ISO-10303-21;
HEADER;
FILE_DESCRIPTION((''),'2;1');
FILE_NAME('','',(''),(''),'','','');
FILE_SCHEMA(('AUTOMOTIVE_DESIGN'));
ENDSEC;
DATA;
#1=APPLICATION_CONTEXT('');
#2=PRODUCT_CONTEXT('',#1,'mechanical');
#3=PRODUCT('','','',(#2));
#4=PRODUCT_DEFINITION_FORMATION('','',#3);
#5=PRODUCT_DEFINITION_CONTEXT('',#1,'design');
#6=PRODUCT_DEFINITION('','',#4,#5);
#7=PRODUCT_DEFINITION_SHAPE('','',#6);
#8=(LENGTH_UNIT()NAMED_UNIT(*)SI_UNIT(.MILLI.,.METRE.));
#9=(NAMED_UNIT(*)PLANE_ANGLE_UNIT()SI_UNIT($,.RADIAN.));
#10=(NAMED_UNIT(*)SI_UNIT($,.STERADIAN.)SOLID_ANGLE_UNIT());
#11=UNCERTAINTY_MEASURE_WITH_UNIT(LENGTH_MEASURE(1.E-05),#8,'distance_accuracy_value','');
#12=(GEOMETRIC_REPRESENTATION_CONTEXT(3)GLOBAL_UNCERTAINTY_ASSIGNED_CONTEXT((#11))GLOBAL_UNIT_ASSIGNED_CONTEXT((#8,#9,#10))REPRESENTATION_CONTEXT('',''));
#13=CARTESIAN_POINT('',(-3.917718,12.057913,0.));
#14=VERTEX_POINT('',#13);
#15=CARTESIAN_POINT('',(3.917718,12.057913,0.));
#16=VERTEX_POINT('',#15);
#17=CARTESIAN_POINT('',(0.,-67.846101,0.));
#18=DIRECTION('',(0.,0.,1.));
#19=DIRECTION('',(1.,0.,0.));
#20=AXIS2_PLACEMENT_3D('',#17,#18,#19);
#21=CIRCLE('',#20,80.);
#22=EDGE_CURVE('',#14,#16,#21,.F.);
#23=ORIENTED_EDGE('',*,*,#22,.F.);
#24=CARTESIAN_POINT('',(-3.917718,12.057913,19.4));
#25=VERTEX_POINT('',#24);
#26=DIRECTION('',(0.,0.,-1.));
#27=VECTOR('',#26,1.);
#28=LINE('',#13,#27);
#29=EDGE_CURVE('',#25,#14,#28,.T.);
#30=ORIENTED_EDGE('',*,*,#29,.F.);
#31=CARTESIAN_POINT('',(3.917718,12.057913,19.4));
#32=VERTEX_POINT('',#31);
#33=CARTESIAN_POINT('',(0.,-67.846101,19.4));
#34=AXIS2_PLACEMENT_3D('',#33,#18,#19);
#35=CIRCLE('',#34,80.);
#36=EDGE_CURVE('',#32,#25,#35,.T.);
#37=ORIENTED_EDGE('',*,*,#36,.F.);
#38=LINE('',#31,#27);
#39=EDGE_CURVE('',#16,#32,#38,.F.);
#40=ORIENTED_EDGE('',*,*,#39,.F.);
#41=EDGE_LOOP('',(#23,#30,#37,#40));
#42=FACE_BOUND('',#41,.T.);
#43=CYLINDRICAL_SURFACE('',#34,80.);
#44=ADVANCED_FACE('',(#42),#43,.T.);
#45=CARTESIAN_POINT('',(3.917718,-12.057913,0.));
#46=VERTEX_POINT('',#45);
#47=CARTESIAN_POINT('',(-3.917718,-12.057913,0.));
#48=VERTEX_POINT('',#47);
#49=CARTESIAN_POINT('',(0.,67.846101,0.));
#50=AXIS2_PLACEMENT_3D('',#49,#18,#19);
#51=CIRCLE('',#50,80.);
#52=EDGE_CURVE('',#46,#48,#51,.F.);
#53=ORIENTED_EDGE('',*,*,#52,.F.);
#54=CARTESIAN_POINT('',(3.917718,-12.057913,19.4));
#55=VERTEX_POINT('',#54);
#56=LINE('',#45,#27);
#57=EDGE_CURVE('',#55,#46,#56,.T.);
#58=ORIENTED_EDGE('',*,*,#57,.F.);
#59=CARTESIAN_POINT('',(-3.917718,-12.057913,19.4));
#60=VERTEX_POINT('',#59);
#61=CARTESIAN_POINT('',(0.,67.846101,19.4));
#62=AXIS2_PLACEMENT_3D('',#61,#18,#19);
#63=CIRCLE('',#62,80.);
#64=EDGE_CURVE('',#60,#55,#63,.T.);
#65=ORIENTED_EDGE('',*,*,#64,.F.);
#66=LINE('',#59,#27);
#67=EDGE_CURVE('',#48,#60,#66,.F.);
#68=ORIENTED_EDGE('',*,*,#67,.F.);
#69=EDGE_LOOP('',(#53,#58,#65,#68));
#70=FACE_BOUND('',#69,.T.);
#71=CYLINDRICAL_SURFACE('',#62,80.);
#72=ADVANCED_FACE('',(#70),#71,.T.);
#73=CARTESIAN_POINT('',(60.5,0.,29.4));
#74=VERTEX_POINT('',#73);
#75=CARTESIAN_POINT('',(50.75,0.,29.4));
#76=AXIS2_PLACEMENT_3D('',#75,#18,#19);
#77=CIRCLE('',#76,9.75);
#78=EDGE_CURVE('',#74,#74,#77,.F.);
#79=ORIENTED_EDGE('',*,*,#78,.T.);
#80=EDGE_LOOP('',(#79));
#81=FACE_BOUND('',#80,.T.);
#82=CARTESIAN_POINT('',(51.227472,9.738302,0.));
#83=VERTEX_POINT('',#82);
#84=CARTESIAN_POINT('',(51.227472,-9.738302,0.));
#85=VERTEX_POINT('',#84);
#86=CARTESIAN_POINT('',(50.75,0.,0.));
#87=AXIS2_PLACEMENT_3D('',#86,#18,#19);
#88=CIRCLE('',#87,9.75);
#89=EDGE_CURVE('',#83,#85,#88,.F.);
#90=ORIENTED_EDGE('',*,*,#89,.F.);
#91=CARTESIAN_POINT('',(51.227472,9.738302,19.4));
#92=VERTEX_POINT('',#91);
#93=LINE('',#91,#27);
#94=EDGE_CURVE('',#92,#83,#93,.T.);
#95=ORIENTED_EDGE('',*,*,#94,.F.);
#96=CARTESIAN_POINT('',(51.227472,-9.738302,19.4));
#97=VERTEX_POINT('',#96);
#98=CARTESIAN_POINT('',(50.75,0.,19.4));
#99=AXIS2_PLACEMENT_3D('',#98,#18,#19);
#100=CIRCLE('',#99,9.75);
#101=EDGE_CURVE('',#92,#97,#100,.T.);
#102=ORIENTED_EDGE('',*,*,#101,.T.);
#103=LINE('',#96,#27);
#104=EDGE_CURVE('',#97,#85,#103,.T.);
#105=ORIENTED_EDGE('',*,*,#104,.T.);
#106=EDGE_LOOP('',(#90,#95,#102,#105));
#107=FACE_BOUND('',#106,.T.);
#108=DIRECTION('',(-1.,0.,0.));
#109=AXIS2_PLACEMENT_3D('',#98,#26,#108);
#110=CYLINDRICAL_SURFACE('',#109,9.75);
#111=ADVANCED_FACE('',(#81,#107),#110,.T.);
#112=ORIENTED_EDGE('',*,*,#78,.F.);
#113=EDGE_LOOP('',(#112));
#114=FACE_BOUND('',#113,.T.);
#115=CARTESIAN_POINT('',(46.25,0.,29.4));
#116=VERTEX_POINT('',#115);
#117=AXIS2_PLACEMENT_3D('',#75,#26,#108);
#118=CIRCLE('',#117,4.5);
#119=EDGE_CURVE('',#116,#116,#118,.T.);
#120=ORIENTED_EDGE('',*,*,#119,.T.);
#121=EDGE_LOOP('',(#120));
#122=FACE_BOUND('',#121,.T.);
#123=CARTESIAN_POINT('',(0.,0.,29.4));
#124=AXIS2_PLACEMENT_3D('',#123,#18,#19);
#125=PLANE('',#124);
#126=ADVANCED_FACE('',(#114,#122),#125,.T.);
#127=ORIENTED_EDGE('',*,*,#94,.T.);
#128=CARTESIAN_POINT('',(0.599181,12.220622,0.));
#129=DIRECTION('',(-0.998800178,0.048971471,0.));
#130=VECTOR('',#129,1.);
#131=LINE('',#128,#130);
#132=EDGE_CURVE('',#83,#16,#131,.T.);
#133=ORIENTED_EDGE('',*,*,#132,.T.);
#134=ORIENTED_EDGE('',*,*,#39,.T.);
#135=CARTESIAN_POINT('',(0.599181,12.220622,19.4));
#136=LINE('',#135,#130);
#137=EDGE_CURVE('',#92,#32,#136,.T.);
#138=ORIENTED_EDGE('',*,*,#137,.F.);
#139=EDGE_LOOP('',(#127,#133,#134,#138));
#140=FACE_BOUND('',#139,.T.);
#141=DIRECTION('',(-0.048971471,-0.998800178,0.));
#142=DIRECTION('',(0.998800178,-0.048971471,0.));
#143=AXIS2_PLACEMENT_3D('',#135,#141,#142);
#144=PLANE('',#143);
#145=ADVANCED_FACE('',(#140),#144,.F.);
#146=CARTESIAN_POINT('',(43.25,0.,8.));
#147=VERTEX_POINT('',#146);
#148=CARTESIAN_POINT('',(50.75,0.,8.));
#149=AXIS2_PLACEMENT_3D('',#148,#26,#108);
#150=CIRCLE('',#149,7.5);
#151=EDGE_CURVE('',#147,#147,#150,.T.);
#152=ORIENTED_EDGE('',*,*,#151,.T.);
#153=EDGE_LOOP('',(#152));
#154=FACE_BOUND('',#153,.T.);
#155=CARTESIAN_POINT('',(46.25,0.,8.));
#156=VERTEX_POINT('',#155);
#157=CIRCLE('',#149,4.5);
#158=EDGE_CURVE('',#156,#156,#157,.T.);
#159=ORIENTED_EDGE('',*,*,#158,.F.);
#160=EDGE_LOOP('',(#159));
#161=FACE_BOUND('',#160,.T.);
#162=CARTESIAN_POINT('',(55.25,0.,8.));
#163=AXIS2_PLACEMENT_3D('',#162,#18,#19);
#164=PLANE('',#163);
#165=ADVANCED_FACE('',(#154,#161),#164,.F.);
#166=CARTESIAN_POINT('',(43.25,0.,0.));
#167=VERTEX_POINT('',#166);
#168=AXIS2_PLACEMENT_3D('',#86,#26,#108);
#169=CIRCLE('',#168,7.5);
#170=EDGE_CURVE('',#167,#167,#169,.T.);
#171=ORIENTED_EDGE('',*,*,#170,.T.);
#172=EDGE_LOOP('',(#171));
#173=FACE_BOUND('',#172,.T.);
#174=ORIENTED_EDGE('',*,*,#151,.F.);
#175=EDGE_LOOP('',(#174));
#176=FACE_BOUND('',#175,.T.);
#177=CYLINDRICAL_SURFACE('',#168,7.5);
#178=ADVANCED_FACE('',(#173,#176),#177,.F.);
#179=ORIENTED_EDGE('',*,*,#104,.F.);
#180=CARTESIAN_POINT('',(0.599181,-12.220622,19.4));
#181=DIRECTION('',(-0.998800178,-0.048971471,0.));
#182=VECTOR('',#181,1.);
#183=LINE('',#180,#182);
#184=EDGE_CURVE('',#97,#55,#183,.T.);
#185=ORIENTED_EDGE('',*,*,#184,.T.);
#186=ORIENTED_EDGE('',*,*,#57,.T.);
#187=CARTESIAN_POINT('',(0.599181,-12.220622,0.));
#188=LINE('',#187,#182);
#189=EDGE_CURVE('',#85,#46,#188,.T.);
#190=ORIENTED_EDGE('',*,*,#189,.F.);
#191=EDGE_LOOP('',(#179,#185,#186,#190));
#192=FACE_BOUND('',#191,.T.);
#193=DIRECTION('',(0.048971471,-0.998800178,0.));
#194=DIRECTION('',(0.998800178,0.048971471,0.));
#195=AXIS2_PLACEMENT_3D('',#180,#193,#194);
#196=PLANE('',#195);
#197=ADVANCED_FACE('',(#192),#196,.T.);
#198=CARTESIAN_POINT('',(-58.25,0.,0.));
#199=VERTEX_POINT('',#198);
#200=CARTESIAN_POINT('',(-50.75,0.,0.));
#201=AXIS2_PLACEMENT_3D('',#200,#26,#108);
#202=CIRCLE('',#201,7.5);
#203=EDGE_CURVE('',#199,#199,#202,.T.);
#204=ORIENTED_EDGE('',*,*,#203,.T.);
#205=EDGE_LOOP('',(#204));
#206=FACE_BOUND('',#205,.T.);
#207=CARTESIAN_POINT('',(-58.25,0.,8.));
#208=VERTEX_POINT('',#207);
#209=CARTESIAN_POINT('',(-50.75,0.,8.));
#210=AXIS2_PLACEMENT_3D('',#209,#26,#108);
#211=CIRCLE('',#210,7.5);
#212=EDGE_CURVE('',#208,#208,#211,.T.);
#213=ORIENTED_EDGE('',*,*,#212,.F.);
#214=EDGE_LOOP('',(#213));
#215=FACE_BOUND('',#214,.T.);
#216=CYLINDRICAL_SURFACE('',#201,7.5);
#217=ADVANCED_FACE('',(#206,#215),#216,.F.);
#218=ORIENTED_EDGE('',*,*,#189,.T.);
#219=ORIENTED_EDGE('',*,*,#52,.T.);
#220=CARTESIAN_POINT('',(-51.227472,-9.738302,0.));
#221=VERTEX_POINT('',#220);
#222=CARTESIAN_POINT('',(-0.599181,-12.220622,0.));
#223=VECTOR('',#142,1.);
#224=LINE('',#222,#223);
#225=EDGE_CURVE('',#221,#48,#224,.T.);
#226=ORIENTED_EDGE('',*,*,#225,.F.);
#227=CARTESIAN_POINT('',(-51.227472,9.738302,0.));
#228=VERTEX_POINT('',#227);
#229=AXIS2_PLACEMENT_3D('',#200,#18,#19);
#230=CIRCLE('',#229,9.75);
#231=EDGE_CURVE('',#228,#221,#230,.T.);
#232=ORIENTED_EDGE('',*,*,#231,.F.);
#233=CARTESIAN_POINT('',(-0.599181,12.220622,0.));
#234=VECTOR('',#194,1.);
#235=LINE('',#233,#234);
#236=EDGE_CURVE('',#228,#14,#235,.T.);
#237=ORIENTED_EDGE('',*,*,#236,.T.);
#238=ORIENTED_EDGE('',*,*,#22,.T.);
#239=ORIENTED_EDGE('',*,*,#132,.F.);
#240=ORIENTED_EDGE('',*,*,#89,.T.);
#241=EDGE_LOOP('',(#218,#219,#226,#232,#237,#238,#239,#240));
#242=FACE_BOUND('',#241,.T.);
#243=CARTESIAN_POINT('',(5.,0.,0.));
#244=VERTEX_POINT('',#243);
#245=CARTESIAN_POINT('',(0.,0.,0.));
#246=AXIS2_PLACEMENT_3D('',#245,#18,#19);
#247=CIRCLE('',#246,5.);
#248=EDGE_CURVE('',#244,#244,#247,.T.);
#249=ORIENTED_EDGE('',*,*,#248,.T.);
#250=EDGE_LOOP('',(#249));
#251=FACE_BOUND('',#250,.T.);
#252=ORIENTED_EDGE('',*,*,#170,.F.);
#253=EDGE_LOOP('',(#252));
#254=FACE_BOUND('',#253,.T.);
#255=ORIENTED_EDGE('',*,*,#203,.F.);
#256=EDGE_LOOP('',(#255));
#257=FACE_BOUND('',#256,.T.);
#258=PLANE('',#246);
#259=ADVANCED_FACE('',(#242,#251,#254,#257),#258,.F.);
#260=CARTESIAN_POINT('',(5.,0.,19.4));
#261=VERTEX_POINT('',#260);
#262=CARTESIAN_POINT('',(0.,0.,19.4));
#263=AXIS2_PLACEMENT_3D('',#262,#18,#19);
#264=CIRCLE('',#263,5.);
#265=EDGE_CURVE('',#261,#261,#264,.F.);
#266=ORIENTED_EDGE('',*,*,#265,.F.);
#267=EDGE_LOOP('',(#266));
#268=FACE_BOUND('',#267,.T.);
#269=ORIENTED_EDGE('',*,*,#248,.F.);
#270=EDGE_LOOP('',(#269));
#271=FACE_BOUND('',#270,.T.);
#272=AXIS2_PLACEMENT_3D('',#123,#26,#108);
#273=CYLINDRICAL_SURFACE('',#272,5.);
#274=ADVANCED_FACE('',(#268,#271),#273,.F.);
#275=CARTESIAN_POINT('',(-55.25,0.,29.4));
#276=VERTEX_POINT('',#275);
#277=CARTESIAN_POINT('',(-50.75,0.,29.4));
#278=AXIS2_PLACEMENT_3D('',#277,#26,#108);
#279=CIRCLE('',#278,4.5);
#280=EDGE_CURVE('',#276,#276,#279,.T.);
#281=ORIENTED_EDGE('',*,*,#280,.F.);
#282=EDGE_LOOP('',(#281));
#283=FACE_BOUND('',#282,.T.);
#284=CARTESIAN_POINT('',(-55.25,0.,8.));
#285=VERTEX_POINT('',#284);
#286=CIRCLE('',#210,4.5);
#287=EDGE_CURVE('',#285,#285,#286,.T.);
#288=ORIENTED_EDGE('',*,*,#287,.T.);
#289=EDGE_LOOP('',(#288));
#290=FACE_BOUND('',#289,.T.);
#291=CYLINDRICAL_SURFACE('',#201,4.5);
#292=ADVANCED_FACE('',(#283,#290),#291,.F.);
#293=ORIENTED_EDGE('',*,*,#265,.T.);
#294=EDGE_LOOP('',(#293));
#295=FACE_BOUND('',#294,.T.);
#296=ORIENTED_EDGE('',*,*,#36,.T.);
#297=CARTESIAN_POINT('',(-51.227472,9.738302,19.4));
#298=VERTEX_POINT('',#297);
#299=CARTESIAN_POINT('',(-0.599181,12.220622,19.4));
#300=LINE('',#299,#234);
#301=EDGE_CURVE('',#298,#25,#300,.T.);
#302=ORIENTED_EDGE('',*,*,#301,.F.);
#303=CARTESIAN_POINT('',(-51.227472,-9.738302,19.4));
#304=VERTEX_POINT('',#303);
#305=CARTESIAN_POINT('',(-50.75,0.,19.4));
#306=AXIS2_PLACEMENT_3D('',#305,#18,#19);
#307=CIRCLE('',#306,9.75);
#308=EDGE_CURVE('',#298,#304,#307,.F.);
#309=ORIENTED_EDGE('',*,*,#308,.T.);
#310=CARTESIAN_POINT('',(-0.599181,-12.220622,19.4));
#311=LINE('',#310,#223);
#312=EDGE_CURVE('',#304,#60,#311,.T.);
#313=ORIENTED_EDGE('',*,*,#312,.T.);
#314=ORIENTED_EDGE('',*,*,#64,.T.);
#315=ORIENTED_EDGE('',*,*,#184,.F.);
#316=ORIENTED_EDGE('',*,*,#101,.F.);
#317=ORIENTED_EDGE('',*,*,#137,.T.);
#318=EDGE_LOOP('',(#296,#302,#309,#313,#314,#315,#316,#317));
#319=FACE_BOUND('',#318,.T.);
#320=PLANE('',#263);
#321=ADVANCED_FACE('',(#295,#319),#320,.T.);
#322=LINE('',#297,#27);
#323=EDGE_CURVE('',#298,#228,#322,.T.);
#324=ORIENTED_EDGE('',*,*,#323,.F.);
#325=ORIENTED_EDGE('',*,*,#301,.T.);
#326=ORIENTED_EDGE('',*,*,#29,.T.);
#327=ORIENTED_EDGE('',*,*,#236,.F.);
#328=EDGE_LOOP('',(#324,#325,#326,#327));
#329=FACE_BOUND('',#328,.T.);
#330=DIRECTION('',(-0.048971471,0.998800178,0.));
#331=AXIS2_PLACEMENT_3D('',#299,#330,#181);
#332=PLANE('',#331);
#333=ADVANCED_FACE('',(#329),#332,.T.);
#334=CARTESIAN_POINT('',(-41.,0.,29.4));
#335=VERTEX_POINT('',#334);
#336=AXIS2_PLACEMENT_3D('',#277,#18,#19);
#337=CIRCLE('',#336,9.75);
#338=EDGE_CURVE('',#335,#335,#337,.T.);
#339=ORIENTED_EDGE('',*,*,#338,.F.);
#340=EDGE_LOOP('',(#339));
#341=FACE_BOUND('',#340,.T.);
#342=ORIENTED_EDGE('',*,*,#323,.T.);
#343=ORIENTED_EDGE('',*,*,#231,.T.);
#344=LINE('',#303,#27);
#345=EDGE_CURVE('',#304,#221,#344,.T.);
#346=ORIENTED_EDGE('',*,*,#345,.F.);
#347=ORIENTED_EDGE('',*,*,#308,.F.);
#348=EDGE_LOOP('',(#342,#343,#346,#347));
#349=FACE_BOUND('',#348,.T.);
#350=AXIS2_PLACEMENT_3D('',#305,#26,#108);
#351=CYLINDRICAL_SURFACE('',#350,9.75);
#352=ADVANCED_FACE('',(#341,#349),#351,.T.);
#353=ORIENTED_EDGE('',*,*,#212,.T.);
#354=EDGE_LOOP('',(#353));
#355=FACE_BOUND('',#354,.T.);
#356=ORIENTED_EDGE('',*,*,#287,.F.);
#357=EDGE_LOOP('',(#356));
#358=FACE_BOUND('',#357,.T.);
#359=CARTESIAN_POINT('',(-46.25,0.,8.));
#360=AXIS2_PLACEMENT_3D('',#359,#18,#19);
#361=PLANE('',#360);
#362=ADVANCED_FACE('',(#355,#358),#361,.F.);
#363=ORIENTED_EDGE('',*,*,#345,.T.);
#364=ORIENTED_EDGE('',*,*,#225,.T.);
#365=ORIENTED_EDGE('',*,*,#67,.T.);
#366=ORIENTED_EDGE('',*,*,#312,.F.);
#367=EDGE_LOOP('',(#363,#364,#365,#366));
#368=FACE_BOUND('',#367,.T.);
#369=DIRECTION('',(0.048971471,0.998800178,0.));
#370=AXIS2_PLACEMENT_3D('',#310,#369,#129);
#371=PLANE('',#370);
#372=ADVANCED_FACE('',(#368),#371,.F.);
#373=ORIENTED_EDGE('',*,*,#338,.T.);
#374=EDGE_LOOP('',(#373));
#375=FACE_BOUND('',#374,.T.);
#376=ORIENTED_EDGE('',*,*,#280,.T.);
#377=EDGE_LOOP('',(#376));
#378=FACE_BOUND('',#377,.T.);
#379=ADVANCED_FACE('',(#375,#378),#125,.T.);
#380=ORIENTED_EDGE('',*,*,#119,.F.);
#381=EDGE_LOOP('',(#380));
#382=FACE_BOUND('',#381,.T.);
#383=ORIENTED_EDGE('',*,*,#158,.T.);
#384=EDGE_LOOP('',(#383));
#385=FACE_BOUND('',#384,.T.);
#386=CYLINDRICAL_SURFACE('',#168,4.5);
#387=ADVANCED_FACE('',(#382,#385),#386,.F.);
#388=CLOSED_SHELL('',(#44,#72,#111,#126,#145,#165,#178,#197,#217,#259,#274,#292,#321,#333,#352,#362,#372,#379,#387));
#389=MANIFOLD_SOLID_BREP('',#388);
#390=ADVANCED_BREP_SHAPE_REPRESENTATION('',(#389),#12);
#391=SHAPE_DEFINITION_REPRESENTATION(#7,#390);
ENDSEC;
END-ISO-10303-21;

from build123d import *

# Parameters (mm, degrees)
SKETCH_1_R                   = 9.75
EXTRUDE_1_DEPTH              = 19.4
SKETCH_1_3_R                 = 9.75
EXTRUDE_2_DEPTH              = 29.4
SKETCH_2_R                   = 5
CUT_EXTRUDE_1_DEPTH          = 69.371576697
FILLET_1_R                   = 80
HOLE_WIZARD_M8_1_D           = 9
HOLE_WIZARD_M8_1_CBORE_D     = 15
HOLE_WIZARD_M8_1_CBORE_DEPTH = 8


with BuildPart() as part:
    # 스케치1 → 보스-돌출1 (new body)
    with BuildSketch(Plane.XY):
        with Locations((-50.75, 0)):
            Circle(SKETCH_1_R)
        with BuildLine():
            Line((-51.227471847, -9.738301733), (0, -12.25))
            Line((0, -12.25), (0, 12.25))
            Line((0, 12.25), (-51.227471847, 9.738301733))
            ThreePointArc((-51.227471847, 9.738301733), (-44.026639624, 7.061085274), (-41, 0))
            ThreePointArc((-41, 0), (-44.026639624, -7.061085274), (-51.227471847, -9.738301733))
        make_face()
        with BuildLine():
            Line((0, 12.25), (0, -12.25))
            Line((0, -12.25), (51.227471847, -9.738301733))
            ThreePointArc((51.227471847, -9.738301733), (41, 0), (51.227471847, 9.738301733))
            Line((51.227471847, 9.738301733), (0, 12.25))
        make_face()
        with Locations((50.75, 0)):
            Circle(SKETCH_1_R)
    extrude(amount=EXTRUDE_1_DEPTH)

    # 스케치1<3> → 보스-돌출2 (add)
    with BuildSketch(Plane.XY):
        with Locations(Location((-50.75, 0, 0), (0, 0, 92.806981348))):
            Circle(SKETCH_1_3_R)
        with Locations(Location((50.75, 0, 0), (0, 0, 87.193018652))):
            Circle(SKETCH_1_3_R)
    extrude(amount=EXTRUDE_2_DEPTH)

    # 스케치2 → 컷-돌출1 (cut, through all)
    with BuildSketch(Plane.XY):
        Circle(SKETCH_2_R)
    extrude(amount=CUT_EXTRUDE_1_DEPTH, mode=Mode.SUBTRACT)

    # 필렛1
    # the kernel refuses this fillet: 80 mm, written as the material it takes off along each edge
    with BuildSketch(Plane(origin=(0, 12.25, -9.806059822), x_dir=(0.9988001777044758, -0.048971471465613654, 0), z_dir=(0, 0, 1))) as fillet_1_piece_1:
        with BuildLine():
            CenterArc((FILLET_1_R * 0.0490302991116, -FILLET_1_R), FILLET_1_R, 90, 5.613962695)
            Line((-FILLET_1_R * 0.048795129693, -FILLET_1_R * 0.00479641003501), (0, 0))
            Line((0, 0), (FILLET_1_R * 0.0490302991116, 0))
        make_face()
    extrude(amount=39.012119645, mode=Mode.SUBTRACT)
    with BuildSketch(Plane(origin=(0, -12.25, -9.806059822), x_dir=(0.9988001777044758, 0.0489714714656137, 0), z_dir=(0, 0, 1))) as fillet_1_piece_2:
        with BuildLine():
            CenterArc((FILLET_1_R * 0.0490302991116, FILLET_1_R), FILLET_1_R, 264.386037305, 5.613962695)
            Line((-FILLET_1_R * 0.048795129693, FILLET_1_R * 0.00479641003501), (0, 0))
            Line((0, 0), (FILLET_1_R * 0.0490302991116, 0))
        make_face()
    extrude(amount=39.012119645, mode=Mode.SUBTRACT)

    # M8 소켓 머리 캡 나사용 카운터보어1 (through all)
    with Locations(Plane(origin=(0, 0, 0), x_dir=(-1, 0, 0), z_dir=(0, 0, -1))):
        with Locations((-50.75, 0), (50.75, 0)):
            CounterBoreHole(HOLE_WIZARD_M8_1_D / 2, HOLE_WIZARD_M8_1_CBORE_D / 2, HOLE_WIZARD_M8_1_CBORE_DEPTH)


solid = part.part
